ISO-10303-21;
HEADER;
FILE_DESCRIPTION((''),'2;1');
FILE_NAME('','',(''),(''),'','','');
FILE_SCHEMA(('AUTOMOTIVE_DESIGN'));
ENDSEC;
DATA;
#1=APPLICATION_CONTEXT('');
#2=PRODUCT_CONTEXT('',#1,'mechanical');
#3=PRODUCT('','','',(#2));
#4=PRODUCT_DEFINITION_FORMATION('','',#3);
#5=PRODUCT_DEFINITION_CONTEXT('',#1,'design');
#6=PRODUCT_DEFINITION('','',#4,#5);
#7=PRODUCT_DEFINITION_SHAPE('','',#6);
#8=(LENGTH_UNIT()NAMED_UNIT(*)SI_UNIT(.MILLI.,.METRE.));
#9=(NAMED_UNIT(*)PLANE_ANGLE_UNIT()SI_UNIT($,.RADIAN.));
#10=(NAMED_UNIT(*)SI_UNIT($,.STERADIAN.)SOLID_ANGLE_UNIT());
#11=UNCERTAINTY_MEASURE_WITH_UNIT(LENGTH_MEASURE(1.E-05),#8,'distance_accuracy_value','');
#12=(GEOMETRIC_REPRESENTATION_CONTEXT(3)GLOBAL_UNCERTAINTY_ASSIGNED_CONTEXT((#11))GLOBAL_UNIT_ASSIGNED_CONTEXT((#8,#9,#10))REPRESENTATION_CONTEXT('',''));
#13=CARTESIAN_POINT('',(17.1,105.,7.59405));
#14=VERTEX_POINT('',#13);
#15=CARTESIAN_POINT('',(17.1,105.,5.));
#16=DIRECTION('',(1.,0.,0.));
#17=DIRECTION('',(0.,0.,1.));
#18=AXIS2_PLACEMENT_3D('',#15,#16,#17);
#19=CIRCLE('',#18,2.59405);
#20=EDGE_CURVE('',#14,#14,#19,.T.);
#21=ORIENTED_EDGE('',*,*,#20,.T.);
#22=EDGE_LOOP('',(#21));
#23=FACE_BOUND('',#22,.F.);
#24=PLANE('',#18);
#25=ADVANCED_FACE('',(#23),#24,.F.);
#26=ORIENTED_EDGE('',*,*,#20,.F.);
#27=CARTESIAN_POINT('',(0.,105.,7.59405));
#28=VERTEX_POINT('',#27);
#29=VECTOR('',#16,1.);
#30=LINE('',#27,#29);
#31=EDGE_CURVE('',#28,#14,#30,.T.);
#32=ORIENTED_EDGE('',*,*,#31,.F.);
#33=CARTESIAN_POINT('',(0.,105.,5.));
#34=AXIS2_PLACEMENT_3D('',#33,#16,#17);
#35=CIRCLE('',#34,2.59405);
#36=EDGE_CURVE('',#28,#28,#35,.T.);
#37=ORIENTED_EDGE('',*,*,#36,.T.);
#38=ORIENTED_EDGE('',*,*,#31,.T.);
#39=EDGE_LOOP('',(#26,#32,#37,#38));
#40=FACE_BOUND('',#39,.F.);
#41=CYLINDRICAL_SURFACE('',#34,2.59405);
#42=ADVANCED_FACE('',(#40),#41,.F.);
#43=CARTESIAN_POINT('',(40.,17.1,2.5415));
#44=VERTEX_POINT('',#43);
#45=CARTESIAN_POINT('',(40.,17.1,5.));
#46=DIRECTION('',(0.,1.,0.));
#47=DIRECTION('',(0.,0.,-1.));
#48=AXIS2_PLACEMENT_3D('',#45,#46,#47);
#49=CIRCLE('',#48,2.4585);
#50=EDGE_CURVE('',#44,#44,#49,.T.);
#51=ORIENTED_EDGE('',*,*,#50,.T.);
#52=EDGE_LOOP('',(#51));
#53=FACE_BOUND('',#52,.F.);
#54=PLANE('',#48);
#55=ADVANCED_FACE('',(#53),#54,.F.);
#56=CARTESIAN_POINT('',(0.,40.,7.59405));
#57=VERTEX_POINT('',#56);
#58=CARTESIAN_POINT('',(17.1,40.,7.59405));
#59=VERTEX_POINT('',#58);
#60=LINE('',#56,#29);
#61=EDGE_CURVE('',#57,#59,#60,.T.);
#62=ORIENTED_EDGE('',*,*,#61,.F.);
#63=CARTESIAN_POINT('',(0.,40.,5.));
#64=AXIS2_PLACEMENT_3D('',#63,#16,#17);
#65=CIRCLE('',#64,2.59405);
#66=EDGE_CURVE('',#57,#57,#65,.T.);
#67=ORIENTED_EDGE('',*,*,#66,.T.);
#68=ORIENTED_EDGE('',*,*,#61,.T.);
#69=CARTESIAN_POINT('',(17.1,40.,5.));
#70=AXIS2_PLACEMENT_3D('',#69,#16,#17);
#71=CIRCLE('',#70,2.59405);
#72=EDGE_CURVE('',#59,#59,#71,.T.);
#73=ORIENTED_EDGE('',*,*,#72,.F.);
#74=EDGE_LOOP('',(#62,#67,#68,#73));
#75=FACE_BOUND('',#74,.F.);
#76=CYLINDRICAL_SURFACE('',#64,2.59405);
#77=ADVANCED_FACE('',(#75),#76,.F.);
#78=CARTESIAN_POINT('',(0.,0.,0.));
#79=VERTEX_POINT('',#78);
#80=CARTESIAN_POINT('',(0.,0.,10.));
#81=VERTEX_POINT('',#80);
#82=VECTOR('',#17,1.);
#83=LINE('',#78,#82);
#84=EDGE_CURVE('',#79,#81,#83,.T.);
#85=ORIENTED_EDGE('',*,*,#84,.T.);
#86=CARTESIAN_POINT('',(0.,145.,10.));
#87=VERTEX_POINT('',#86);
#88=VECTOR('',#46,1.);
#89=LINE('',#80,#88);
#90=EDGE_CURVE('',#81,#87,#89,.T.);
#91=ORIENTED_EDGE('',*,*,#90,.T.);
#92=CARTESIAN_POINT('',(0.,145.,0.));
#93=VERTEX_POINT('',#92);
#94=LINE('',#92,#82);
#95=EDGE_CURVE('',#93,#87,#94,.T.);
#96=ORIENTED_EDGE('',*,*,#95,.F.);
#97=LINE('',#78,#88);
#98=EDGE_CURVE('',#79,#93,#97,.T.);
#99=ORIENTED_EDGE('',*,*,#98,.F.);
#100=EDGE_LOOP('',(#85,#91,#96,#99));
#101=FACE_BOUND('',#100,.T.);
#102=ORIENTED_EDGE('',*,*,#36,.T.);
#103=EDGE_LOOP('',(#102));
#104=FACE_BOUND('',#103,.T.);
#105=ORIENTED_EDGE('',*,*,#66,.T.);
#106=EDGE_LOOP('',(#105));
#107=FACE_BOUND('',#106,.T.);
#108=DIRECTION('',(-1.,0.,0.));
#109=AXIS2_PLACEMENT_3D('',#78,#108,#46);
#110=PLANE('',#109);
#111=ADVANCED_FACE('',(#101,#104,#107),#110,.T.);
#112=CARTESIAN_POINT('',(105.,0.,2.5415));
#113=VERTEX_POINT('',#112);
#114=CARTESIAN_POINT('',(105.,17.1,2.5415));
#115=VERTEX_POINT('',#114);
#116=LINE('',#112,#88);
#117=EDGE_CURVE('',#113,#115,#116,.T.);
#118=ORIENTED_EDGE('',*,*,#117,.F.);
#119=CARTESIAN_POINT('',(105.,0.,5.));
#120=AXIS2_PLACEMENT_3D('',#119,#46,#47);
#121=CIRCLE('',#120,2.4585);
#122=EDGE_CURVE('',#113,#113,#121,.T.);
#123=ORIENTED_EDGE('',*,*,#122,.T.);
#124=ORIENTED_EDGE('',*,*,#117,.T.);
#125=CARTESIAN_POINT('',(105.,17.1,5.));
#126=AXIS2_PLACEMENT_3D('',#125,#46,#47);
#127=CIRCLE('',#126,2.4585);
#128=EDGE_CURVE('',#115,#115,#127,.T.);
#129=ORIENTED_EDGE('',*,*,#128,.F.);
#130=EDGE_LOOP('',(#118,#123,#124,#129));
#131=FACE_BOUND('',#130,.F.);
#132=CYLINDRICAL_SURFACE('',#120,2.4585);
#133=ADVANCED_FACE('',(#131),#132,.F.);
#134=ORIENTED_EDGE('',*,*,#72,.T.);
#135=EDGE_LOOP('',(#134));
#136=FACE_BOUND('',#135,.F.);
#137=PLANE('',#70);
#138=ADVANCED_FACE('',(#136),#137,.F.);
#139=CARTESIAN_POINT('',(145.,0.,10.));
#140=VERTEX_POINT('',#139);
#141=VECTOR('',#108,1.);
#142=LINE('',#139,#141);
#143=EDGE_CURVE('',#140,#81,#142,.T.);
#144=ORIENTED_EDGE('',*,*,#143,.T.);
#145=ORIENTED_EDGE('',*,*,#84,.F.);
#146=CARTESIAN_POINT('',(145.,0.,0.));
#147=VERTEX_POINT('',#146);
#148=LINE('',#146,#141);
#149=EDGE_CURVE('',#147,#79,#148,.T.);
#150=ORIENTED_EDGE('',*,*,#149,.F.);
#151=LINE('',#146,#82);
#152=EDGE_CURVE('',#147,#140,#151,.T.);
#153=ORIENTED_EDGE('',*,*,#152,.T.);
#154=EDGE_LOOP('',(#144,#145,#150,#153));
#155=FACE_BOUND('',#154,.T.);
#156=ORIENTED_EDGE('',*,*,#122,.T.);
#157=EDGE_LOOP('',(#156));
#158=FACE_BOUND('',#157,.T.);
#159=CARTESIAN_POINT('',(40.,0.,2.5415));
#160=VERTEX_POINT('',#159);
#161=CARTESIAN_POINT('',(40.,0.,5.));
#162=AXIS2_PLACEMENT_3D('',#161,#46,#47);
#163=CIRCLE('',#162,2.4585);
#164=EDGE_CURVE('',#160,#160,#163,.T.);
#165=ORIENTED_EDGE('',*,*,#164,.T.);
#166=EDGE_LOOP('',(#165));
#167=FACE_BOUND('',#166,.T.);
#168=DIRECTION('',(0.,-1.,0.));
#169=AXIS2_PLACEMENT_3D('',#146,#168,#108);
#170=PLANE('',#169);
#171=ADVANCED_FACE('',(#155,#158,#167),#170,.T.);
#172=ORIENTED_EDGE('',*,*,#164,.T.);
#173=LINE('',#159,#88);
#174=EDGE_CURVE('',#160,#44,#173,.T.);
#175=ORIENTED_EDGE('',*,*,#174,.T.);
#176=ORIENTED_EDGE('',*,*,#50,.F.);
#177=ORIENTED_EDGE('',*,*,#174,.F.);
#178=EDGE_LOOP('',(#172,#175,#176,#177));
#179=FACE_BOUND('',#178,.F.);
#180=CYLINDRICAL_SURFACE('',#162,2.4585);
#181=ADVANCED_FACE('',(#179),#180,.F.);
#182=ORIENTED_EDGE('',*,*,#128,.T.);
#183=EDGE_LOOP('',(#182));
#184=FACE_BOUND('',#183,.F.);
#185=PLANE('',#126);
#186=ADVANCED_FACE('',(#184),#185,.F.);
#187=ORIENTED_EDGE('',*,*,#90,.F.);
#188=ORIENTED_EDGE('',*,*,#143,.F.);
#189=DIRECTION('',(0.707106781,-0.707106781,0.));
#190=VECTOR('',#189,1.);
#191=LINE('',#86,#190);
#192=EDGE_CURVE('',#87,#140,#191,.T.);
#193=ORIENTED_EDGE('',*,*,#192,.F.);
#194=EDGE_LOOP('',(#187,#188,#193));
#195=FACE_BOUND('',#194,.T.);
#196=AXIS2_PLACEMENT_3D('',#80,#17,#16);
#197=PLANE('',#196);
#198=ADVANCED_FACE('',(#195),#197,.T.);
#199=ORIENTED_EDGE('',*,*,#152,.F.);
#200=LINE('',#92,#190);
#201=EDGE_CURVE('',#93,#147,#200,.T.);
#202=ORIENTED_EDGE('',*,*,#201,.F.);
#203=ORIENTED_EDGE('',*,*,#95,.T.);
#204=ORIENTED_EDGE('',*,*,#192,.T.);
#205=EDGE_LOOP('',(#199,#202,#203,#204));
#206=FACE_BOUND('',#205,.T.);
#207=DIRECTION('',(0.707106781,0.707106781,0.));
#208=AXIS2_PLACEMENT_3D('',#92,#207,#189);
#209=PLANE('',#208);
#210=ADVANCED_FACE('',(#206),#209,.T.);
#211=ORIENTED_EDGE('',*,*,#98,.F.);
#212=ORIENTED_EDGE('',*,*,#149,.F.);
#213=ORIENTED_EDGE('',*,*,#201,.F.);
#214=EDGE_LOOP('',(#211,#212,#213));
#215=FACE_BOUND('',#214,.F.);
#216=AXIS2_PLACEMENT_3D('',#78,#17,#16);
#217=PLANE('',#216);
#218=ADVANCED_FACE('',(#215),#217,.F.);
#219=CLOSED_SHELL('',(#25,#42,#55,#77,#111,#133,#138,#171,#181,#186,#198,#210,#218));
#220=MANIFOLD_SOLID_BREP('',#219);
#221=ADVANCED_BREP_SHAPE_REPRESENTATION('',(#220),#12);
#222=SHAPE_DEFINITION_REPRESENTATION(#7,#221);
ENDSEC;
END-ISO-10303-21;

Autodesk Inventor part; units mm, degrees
ref_plane "YZ Plane" through (0, 0, 0) normal (1, 0, 0) x (0, 1, 0)
ref_plane "XZ Plane" through (0, 0, 0) normal (0, 1, 0) x (-1, 0, 0)
ref_plane "XY Plane" through (0, 0, 0) normal (0, 0, 1) x (1, 0, 0)
sketch "Sketch1" plane through (0, 0, 0) normal (0, 0, 1) x (1, 0, 0)
  line L0 (0, 0) -> (0, 145)
  line L1 (0, 145) -> (145, 0)
  line L2 (145, 0) -> (0, 0)
  dimension "d0" = 145
  dimension "d1" = 145
extrude "Extrusion1" add sketch "Sketch1" along normal blind 10
sketch "Sketch2" plane through (0, 0, 0) normal (0, -1, 0) x (1, 0, 0)
  line L0 (145, 0) -> (145, 10) projected
  line L1 (145, 5) -> (0, 5)
  circle A0 centre (105, 5) radius 3
  circle A1 centre (40, 5) radius 3
  line L2 (0, 0) -> (0, 10) projected
  dimension "d4" = 6
  dimension "d5" = 6
  dimension "d6" = 40
  dimension "d7" = 40
hole "Hole1" at (105, 0, 5) at (40, 0, 5) direction (0, 1, 0) diameter 4.917 depth 17.1 thread size "M6x1" class "6H" standard "ISO Metric profile"
sketch "Sketch3" plane through (0, 0, 0) normal (-1, 0, 0) x (0, 0, 1)
  line L0 (0, 145) -> (10, 145) projected
  line L1 (5, 145) -> (5, 0)
  line L2 (0, 0) -> (10, 0) projected
  circle A0 centre (5, 105) radius 3
  circle A1 centre (5, 40) radius 3
  dimension "d15" = 6
  dimension "d16" = 6
  dimension "d17" = 40
  dimension "d18" = 40
hole "Hole2" at (0, 105, 5) at (0, 40, 5) direction (1, 0, 0) diameter 5.1881 depth 17.1 thread size "M6x0.75" class "6H" standard "ISO Metric profile"
sketch "Sketch4" plane through (0, 0, 0) normal (-1, 0, 0) x (0, 0, 1)
  point P0 (0, 0)
properties part number "145x145(li)"
